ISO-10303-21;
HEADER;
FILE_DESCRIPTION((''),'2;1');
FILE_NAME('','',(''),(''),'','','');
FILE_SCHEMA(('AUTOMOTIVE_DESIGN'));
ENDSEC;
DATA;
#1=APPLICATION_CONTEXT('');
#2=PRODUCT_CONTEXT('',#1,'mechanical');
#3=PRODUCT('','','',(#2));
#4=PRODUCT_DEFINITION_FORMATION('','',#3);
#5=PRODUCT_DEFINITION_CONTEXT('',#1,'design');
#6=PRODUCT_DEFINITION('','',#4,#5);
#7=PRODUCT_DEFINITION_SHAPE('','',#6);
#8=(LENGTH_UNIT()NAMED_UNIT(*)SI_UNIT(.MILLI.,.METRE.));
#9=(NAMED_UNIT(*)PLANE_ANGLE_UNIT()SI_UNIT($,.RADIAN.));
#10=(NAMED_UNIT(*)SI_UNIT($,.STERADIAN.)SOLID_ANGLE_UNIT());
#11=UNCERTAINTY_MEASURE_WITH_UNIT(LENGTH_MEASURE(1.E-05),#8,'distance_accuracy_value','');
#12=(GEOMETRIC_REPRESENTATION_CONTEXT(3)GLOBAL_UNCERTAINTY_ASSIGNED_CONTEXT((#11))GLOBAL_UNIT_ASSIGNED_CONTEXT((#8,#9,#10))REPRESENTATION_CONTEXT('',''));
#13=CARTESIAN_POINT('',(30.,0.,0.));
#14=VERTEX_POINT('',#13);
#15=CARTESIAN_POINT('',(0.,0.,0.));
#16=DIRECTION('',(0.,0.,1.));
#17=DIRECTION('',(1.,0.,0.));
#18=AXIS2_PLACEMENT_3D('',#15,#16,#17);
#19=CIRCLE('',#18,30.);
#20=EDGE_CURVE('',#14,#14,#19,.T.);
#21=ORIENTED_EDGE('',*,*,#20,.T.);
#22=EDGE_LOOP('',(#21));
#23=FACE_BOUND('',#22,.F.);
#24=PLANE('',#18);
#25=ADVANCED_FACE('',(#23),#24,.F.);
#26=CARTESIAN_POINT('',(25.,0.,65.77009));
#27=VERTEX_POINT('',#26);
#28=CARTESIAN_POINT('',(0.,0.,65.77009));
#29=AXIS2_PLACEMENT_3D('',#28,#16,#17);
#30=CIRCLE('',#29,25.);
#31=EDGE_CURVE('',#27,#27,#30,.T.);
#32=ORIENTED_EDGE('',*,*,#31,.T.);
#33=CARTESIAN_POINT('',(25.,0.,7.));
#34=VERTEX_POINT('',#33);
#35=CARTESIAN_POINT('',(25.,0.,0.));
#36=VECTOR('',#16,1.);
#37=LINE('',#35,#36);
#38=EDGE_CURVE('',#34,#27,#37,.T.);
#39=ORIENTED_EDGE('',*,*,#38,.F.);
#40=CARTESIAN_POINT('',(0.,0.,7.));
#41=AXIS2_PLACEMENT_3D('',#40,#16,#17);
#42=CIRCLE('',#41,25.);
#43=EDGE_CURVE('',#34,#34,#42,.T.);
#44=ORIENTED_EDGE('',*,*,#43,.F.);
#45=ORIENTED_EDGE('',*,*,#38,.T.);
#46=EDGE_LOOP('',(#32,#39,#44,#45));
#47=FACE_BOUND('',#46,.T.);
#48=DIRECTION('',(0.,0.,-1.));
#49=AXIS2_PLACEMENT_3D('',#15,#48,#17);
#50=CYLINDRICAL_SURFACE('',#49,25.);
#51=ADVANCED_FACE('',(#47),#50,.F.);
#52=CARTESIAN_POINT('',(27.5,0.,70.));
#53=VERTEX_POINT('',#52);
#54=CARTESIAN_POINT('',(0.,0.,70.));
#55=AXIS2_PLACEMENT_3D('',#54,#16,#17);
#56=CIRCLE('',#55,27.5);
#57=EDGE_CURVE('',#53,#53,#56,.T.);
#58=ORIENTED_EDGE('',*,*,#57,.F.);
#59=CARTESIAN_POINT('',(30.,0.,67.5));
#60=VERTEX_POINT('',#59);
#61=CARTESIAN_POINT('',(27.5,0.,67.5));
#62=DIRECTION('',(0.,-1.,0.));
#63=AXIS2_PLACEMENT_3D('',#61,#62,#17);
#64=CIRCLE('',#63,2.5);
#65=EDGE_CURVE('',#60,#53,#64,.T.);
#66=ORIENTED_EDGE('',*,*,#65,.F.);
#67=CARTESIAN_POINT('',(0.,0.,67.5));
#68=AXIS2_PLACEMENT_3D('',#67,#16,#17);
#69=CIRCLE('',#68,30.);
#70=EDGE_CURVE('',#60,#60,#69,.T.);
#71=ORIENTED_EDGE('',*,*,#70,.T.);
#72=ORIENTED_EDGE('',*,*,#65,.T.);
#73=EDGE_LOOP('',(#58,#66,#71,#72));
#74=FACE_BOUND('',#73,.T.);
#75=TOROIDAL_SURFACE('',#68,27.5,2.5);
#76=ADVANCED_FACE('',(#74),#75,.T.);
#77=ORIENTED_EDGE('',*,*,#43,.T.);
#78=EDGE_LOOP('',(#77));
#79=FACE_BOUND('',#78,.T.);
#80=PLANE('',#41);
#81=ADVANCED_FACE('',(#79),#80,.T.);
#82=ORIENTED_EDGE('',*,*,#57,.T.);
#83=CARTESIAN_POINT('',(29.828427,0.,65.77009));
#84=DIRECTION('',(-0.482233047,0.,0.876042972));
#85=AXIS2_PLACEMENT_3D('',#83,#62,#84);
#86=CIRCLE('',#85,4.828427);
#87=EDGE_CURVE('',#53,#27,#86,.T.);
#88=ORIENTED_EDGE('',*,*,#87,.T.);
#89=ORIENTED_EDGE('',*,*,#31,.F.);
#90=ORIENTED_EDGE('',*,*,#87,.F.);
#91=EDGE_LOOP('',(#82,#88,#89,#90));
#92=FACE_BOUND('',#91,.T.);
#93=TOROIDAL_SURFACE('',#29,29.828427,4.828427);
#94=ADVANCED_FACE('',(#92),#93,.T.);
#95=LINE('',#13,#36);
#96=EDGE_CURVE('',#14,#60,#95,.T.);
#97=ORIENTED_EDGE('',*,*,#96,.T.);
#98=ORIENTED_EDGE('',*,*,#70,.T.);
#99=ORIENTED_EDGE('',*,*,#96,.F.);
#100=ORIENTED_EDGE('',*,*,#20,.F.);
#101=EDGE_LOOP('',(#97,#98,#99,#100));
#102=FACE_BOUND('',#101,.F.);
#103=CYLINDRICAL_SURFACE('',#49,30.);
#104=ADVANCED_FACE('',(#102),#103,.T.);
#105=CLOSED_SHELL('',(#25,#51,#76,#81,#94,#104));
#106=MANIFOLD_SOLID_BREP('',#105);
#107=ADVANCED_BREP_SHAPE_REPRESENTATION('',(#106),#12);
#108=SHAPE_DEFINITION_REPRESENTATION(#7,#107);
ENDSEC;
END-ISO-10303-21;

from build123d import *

# Parameters (mm, degrees)
F0_R     = 30
F0_R_2   = 25
F1_DEPTH = 70
F2_DEPTH = 7
F3_R     = 2.5


# Not quite as in the source:
# - a fillet or chamfer that OpenCascade refuses, or shapes differently, is made with other operations: its cross-section is extruded or revolved along the edge and cut away or added


with BuildPart() as f1:
    # F0 (on Top) → F1 (new body)
    with BuildSketch(Plane.XY):
        Circle(F0_R)
        Circle(F0_R_2, mode=Mode.SUBTRACT)
    extrude(amount=F1_DEPTH)

    # F0 (on Top) → F2 (join)
    with BuildSketch(Plane.XY):
        Circle(F0_R_2)
    extrude(amount=F2_DEPTH)

    # F3
    f3_edges = [f1.edges().sort_by_distance(p)[0] for p in [
        (-30, 0, 70),
    ]]
    fillet(f3_edges, radius=F3_R)

    # F4: fillet of radius 4.8284271247 on 1 edges, made by hand

    # F4_s1 → F4_t2 (revolve, cut)
    with BuildSketch(Plane.XZ):
        with BuildLine():
            ThreePointArc((27.5, 70), (25.6717247547, 68.2268227163), (25, 65.7700903528))
            Line((25, 65.7700903528), (24.9034314575, 65.7700903528))
            Line((24.9034314575, 65.7700903528), (24.9034314575, 70))
            Line((24.9034314575, 70), (25, 70.0965685425))
            ThreePointArc((25, 70.0965685425), (26.25, 70.0965685425), (27.4534314575, 70.0845981929))
            Line((27.4534314575, 70.0845981929), (27.5, 70))
        make_face()
    revolve(axis=Axis((0, 0, 70), (0, 0, 1)), mode=Mode.SUBTRACT)


solid = f1.part
